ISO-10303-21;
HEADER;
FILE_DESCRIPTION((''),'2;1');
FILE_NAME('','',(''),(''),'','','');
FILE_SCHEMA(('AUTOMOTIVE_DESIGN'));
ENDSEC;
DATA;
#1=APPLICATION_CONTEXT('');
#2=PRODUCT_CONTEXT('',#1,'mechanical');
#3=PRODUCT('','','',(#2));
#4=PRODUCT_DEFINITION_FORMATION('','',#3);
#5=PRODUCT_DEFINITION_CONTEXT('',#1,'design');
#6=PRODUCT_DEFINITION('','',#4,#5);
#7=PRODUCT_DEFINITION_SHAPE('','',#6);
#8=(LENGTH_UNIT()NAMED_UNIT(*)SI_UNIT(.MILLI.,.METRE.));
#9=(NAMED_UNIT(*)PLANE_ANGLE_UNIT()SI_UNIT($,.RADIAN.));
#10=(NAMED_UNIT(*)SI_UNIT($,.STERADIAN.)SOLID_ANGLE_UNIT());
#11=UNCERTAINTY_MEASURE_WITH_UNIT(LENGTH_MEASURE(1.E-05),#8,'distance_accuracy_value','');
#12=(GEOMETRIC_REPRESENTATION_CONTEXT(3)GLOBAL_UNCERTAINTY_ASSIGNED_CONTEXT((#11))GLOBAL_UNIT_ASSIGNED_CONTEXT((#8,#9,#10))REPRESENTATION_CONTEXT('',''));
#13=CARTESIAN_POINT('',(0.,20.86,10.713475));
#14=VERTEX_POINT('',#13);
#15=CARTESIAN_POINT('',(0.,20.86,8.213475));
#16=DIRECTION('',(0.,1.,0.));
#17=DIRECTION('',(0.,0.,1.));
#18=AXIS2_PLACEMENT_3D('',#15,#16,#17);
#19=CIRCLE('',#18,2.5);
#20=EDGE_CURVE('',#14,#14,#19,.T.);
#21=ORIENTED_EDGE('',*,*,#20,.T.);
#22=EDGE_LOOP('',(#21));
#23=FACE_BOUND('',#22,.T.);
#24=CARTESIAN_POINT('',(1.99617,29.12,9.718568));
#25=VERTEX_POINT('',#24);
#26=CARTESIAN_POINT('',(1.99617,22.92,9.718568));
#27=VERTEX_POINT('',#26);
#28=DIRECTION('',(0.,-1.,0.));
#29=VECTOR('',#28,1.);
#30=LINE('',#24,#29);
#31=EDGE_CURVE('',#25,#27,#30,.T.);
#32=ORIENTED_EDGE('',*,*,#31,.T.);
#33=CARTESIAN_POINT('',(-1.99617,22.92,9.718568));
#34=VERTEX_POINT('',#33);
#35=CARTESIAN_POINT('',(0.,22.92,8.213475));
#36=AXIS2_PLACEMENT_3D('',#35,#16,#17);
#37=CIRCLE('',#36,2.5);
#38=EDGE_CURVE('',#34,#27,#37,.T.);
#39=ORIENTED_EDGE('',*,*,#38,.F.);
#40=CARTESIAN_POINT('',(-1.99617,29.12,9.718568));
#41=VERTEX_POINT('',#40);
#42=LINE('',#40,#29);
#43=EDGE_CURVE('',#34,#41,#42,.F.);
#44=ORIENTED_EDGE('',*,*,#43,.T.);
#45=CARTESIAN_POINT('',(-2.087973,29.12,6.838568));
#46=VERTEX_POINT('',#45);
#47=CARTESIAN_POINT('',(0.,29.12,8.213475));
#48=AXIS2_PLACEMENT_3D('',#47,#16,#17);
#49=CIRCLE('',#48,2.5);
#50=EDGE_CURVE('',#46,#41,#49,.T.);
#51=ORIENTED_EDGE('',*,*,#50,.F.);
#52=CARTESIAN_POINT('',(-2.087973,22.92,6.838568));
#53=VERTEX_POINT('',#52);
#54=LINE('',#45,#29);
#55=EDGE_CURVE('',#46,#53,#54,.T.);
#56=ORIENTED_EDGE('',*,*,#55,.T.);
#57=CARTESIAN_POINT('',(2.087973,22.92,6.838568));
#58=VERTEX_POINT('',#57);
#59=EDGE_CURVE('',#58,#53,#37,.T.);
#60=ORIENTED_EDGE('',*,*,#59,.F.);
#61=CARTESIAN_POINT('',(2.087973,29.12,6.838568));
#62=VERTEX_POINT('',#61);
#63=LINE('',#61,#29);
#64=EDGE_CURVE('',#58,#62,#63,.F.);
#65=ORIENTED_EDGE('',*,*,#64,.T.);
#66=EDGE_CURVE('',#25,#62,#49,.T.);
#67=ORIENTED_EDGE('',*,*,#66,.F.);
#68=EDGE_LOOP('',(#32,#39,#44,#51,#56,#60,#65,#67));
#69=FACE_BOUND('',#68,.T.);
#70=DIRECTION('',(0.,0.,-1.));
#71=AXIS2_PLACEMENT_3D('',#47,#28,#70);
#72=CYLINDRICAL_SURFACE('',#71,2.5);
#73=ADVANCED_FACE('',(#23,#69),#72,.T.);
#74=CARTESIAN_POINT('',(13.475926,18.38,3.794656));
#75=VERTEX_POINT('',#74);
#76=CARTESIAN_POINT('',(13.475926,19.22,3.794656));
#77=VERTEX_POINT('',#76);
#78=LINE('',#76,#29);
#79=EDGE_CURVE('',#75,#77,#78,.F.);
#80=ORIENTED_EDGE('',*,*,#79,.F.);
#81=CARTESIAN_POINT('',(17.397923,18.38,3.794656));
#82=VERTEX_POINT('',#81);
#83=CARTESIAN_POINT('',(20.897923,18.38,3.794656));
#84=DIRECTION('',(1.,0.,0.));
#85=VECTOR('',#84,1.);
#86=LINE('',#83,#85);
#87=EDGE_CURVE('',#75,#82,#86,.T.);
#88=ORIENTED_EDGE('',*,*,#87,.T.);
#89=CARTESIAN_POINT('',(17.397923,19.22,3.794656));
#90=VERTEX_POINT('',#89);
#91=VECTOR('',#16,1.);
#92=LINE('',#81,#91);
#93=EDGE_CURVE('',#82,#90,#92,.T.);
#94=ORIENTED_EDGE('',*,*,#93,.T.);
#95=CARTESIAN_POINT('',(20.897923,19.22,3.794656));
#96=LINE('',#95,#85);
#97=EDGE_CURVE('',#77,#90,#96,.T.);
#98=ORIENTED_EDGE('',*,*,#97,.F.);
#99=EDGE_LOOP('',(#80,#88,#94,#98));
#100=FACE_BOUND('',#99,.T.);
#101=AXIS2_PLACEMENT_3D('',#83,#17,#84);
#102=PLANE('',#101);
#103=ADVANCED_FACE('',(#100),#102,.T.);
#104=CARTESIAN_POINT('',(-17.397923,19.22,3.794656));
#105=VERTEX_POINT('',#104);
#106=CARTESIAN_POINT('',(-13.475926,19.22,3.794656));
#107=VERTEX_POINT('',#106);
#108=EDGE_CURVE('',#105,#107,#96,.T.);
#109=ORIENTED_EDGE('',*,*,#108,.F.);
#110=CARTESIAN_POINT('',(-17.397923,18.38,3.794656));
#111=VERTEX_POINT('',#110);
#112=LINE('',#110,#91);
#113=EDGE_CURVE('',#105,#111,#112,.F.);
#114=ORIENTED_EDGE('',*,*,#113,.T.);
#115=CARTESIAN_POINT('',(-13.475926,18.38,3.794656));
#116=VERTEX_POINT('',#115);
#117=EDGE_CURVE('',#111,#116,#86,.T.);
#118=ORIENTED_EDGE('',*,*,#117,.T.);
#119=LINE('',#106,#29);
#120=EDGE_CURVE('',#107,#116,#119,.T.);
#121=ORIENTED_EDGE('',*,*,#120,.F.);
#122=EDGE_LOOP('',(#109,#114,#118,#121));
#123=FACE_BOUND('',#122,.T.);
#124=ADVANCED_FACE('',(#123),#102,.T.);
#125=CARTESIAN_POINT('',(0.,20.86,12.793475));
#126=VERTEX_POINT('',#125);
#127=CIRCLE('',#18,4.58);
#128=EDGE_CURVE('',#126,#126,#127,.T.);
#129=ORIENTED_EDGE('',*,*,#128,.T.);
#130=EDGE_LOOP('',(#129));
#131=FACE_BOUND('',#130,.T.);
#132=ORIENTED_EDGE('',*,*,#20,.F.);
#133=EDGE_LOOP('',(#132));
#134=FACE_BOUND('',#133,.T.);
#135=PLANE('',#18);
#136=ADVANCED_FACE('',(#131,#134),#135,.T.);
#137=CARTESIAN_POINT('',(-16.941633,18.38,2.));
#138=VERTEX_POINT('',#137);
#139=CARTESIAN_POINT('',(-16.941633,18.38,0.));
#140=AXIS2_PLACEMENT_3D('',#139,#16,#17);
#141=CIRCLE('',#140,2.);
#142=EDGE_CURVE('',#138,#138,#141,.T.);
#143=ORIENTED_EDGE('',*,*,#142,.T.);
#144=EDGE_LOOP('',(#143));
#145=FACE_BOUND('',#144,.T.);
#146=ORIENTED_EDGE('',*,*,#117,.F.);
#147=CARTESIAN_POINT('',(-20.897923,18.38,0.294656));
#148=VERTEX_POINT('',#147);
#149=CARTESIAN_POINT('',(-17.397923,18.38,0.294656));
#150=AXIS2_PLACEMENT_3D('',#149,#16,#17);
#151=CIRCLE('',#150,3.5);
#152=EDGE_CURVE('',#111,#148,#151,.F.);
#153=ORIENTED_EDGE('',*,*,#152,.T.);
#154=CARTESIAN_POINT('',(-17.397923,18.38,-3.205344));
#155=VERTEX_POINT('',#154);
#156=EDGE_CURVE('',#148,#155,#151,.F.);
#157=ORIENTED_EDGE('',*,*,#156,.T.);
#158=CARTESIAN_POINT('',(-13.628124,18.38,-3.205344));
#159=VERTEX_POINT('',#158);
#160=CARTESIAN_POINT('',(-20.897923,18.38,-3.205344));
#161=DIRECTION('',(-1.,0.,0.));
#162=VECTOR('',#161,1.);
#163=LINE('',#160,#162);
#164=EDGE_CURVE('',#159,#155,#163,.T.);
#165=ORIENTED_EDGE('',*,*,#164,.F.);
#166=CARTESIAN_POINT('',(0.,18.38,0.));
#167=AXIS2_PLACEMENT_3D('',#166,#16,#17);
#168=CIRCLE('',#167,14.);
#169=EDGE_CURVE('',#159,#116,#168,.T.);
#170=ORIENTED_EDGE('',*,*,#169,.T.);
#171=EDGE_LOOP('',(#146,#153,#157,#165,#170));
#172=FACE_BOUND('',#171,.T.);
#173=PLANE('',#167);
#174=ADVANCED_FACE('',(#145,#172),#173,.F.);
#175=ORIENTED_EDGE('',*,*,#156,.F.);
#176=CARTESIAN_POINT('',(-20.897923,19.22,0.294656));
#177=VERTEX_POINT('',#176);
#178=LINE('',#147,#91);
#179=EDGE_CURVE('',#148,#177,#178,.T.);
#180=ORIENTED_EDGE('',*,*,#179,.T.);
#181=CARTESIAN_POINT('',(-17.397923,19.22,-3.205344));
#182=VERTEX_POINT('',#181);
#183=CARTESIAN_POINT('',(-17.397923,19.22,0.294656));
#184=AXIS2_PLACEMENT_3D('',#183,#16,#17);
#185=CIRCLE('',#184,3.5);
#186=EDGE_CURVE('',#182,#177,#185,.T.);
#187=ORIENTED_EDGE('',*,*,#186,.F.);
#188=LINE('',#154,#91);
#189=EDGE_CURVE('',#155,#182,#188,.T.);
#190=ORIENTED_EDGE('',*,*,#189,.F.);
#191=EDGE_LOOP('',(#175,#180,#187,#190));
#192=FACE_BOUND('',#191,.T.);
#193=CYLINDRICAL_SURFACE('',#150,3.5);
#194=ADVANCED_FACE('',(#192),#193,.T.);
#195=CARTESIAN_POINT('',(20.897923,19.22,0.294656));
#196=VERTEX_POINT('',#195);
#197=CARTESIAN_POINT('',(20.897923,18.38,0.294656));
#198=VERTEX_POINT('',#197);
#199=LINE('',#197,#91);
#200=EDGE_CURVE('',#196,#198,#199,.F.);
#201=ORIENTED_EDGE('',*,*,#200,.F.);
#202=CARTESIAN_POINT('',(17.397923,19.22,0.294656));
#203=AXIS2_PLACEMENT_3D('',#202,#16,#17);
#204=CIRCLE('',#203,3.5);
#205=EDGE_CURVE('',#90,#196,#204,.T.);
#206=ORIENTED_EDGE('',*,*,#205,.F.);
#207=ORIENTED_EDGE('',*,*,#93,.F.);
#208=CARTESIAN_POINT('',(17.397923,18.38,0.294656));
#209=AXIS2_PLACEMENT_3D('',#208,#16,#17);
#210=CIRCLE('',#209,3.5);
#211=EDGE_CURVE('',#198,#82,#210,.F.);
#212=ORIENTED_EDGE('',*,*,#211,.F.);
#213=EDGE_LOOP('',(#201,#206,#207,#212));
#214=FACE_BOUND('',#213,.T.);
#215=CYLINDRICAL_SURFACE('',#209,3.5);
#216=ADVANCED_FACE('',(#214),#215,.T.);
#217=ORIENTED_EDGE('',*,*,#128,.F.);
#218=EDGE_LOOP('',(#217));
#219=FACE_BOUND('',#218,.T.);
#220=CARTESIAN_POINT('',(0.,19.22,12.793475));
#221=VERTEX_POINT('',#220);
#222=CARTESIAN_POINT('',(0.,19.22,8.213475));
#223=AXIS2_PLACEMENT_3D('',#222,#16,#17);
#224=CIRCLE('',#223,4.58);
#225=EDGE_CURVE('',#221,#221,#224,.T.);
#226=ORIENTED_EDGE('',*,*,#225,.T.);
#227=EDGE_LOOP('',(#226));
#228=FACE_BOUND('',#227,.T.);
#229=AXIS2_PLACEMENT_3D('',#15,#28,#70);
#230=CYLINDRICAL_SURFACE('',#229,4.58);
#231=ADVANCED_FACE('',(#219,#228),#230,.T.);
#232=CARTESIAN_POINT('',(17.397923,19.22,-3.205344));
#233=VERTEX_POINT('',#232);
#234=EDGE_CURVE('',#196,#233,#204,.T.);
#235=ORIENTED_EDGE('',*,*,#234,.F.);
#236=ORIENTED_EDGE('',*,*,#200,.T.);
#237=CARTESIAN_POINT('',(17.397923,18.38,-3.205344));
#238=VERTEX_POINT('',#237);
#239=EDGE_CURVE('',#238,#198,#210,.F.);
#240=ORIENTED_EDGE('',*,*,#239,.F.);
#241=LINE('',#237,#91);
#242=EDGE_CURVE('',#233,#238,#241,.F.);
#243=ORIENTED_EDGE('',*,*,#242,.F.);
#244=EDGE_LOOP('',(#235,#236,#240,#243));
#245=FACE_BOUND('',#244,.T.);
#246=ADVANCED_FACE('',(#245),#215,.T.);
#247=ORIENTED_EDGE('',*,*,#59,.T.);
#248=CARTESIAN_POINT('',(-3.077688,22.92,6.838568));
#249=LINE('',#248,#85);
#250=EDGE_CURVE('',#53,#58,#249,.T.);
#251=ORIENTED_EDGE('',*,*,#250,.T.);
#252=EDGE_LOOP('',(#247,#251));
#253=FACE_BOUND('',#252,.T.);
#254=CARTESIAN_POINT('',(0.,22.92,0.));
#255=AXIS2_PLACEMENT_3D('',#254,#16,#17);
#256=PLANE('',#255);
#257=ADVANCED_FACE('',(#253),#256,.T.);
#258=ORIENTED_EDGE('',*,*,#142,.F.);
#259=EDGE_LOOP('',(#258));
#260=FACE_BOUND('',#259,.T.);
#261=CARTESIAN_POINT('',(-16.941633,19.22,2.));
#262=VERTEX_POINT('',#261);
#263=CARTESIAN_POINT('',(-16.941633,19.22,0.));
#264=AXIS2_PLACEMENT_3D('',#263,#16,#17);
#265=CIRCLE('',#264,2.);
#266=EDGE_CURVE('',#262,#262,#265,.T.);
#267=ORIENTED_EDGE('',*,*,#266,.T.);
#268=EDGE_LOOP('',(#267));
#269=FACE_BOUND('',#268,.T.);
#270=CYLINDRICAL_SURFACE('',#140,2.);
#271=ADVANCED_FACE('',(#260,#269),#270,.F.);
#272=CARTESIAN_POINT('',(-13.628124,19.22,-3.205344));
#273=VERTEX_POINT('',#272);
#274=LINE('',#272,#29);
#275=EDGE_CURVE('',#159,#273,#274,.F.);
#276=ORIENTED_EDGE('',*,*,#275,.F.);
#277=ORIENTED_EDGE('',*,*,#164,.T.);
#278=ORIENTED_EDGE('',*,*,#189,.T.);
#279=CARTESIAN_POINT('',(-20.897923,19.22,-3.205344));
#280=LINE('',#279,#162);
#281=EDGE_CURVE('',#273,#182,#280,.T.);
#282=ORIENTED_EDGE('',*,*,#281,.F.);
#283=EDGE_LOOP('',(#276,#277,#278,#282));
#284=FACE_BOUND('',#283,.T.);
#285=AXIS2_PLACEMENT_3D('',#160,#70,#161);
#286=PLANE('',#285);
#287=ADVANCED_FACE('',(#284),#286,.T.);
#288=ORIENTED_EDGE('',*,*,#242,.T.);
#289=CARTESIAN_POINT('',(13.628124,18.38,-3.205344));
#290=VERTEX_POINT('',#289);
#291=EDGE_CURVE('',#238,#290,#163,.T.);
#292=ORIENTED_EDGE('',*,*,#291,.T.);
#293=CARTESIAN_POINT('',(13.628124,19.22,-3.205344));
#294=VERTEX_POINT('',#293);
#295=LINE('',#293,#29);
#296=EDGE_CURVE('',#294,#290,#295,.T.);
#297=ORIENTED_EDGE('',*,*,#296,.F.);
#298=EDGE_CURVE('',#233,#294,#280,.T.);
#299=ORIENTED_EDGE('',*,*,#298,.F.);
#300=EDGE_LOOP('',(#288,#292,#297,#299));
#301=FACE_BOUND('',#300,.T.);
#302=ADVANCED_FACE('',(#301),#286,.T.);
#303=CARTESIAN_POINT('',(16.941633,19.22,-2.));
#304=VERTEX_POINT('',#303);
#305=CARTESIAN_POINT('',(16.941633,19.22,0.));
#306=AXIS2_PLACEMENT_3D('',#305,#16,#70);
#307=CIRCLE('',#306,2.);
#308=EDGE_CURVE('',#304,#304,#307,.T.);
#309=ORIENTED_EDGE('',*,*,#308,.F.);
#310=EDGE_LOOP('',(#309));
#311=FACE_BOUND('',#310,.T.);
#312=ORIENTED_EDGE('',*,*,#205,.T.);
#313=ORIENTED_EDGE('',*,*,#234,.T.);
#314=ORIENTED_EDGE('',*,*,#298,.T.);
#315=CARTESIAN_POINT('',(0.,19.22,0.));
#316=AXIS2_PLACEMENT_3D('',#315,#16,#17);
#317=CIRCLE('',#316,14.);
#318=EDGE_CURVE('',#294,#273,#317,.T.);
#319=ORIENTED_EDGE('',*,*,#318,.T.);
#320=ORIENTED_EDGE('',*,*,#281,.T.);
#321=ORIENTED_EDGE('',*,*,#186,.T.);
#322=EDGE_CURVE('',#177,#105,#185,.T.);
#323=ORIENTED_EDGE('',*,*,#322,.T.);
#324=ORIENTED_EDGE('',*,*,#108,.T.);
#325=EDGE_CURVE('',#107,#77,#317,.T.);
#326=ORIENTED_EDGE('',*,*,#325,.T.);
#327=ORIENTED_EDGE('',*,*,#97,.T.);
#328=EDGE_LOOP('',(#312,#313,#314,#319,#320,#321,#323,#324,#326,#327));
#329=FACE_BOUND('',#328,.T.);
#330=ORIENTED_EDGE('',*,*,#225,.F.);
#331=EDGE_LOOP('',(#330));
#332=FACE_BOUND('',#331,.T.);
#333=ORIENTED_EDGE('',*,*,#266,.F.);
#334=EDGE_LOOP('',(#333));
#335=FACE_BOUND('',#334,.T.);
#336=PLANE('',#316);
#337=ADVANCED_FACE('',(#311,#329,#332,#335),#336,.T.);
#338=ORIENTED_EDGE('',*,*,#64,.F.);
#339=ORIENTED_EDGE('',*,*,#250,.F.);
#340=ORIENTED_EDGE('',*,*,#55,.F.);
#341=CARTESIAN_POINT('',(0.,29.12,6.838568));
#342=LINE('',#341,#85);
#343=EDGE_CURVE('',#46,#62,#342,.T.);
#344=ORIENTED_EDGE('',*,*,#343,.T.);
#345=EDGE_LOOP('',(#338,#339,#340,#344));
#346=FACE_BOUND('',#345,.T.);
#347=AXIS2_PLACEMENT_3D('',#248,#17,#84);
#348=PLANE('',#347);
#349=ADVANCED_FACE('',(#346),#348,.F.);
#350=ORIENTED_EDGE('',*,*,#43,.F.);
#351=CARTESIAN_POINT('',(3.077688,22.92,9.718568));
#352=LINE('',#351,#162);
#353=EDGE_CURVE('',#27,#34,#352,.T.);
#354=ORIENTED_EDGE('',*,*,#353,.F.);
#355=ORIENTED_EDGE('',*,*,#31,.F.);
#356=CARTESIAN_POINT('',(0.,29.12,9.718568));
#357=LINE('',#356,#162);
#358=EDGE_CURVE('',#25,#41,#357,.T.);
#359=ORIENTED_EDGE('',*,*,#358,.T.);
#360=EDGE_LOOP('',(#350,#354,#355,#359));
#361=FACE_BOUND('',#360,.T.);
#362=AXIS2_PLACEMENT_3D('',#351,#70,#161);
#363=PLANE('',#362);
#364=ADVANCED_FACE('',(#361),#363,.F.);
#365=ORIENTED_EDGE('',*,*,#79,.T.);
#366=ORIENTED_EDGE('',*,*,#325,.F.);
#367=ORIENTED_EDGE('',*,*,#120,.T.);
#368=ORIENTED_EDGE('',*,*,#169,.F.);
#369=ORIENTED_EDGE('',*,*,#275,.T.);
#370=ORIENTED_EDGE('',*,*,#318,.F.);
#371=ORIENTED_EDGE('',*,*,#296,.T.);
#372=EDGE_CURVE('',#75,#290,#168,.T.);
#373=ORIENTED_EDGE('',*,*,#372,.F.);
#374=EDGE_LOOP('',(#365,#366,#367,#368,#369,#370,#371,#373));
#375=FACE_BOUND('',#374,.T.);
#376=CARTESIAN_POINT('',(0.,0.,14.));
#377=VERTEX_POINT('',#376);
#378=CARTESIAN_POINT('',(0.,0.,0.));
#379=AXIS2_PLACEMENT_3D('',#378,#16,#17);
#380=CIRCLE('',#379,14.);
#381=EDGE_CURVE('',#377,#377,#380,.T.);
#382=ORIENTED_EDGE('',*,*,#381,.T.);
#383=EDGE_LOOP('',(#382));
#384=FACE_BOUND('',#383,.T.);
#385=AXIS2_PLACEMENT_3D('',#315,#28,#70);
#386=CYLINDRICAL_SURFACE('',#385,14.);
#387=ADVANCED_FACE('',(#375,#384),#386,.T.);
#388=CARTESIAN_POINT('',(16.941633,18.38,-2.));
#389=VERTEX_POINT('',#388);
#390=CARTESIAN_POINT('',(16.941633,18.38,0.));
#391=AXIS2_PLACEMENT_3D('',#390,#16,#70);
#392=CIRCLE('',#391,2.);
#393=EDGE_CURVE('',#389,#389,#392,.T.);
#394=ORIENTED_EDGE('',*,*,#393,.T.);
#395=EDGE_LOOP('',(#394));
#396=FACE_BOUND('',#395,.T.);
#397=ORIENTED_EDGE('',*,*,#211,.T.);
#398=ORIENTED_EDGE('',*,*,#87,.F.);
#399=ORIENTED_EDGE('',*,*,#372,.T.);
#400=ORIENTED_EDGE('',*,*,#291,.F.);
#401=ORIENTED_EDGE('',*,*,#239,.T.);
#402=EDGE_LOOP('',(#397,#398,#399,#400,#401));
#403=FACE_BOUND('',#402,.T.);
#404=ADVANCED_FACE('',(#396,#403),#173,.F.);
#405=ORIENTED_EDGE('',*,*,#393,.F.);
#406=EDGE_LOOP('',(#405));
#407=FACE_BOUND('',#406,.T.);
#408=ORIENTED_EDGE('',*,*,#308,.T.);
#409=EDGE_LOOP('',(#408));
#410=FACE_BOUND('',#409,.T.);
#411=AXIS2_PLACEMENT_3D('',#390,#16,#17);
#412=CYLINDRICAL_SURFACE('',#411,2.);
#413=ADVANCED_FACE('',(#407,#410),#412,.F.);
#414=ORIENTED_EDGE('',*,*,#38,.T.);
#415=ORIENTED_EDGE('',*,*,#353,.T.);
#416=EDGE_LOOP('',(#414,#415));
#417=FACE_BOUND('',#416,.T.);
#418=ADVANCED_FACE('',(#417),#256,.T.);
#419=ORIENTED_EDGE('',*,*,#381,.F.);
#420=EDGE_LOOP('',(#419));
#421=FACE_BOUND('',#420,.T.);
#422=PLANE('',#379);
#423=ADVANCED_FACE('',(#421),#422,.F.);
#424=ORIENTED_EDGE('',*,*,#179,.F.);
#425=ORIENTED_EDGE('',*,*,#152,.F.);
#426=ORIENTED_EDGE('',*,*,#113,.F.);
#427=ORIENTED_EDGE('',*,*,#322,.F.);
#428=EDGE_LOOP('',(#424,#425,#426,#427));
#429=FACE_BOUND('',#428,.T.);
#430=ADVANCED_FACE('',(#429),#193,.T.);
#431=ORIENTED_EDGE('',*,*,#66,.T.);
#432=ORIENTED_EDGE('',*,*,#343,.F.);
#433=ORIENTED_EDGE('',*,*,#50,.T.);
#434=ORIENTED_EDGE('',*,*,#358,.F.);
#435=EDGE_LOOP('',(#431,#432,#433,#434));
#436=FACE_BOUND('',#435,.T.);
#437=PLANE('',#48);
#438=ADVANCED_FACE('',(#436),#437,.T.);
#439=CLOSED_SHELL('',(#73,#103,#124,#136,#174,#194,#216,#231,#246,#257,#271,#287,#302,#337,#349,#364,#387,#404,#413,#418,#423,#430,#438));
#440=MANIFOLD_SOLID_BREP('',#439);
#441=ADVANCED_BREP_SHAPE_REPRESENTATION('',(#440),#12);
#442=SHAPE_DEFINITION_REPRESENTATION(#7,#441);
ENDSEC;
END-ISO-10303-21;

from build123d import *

# Parameters (mm, degrees)
SKETCH1_R           = 14
BOSS_EXTRUDE1_DEPTH = 19.22
SKETCH2_W           = 41.795845618
SKETCH2_H           = 7
BOSS_EXTRUDE2_DEPTH = 0.84
FILLET2_R           = 3.5
SKETCH3_R           = 2
CUT_EXTRUDE1_DEPTH  = 0.84
SKETCH4_R           = 4.58
BOSS_EXTRUDE3_DEPTH = 1.64
SKETCH5_R           = 2.5
BOSS_EXTRUDE4_DEPTH = 8.26
SKETCH6_OUTSIDE_W   = 55.422
SKETCH6_OUTSIDE_H   = 41.626
SKETCH6_OUTSIDE_W_2 = 6.15537624
SKETCH6_OUTSIDE_H_2 = 2.88
CUT_EXTRUDE2_DEPTH  = 6.2


with BuildPart() as part:
    # Sketch1 → Boss-Extrude1 (new body)
    with BuildSketch(Plane(origin=(0, 0, 0), x_dir=(1, 0, 0), z_dir=(0, 1, 0))):
        with Locations(Location((0, 0, 0), (0, 0, 270))):
            Circle(SKETCH1_R)
    extrude(amount=BOSS_EXTRUDE1_DEPTH)

    # Sketch2 → Boss-Extrude2 (add)
    with BuildSketch(Plane(origin=(0, 19.22, 0), x_dir=(1, 0, 0), z_dir=(0, 1, 0))):
        with Locations((0, -0.294656178)):
            Rectangle(SKETCH2_W, SKETCH2_H)
    extrude(amount=-BOSS_EXTRUDE2_DEPTH)

    # Fillet2
    fillet2_edges = [part.edges().sort_by_distance(p)[0] for p in [
        (20.897922809, 18.8, -3.205343822),
        (20.897922809, 18.8, 3.794656178),
        (-20.897922809, 18.8, -3.205343822),
        (-20.897922809, 18.8, 3.794656178),
    ]]
    fillet(fillet2_edges, radius=FILLET2_R - 0.0001)  # a hair under: the kernel refuses the full size

    # Sketch3 → Cut-Extrude1 (cut)
    with BuildSketch(Plane(origin=(0, 19.22, 0), x_dir=(1, 0, 0), z_dir=(0, 1, 0))):
        with Locations(Location((-16.94163256, 0, 0), (0, 0, 270))):
            Circle(SKETCH3_R)
        with Locations(Location((16.94163256, 0, 0), (0, 0, 90))):
            Circle(SKETCH3_R)
    extrude(amount=-CUT_EXTRUDE1_DEPTH, mode=Mode.SUBTRACT)

    # Sketch4 → Boss-Extrude3 (add)
    with BuildSketch(Plane(origin=(0, 19.22, 0), x_dir=(1, 0, 0), z_dir=(0, 1, 0))):
        with Locations(Location((0, -8.213475026, 0), (0, 0, 270))):
            Circle(SKETCH4_R)
    extrude(amount=BOSS_EXTRUDE3_DEPTH)

    # Sketch5 → Boss-Extrude4 (add)
    with BuildSketch(Plane(origin=(0, 20.86, 0), x_dir=(1, 0, 0), z_dir=(0, 1, 0))):
        with Locations(Location((0, -8.213475026, 0), (0, 0, 270))):
            Circle(SKETCH5_R)
    extrude(amount=BOSS_EXTRUDE4_DEPTH)

    # Sketch6 outside → Cut-Extrude2 (cut)
    with BuildSketch(Plane(origin=(0, 29.12, 0), x_dir=(1, 0, 0), z_dir=(0, 1, 0))):
        Rectangle(SKETCH6_OUTSIDE_W, SKETCH6_OUTSIDE_H)
        with Locations((0, -8.278567721)):
            Rectangle(SKETCH6_OUTSIDE_W_2, SKETCH6_OUTSIDE_H_2, mode=Mode.SUBTRACT)
    extrude(amount=-CUT_EXTRUDE2_DEPTH, mode=Mode.SUBTRACT)


solid = part.part
